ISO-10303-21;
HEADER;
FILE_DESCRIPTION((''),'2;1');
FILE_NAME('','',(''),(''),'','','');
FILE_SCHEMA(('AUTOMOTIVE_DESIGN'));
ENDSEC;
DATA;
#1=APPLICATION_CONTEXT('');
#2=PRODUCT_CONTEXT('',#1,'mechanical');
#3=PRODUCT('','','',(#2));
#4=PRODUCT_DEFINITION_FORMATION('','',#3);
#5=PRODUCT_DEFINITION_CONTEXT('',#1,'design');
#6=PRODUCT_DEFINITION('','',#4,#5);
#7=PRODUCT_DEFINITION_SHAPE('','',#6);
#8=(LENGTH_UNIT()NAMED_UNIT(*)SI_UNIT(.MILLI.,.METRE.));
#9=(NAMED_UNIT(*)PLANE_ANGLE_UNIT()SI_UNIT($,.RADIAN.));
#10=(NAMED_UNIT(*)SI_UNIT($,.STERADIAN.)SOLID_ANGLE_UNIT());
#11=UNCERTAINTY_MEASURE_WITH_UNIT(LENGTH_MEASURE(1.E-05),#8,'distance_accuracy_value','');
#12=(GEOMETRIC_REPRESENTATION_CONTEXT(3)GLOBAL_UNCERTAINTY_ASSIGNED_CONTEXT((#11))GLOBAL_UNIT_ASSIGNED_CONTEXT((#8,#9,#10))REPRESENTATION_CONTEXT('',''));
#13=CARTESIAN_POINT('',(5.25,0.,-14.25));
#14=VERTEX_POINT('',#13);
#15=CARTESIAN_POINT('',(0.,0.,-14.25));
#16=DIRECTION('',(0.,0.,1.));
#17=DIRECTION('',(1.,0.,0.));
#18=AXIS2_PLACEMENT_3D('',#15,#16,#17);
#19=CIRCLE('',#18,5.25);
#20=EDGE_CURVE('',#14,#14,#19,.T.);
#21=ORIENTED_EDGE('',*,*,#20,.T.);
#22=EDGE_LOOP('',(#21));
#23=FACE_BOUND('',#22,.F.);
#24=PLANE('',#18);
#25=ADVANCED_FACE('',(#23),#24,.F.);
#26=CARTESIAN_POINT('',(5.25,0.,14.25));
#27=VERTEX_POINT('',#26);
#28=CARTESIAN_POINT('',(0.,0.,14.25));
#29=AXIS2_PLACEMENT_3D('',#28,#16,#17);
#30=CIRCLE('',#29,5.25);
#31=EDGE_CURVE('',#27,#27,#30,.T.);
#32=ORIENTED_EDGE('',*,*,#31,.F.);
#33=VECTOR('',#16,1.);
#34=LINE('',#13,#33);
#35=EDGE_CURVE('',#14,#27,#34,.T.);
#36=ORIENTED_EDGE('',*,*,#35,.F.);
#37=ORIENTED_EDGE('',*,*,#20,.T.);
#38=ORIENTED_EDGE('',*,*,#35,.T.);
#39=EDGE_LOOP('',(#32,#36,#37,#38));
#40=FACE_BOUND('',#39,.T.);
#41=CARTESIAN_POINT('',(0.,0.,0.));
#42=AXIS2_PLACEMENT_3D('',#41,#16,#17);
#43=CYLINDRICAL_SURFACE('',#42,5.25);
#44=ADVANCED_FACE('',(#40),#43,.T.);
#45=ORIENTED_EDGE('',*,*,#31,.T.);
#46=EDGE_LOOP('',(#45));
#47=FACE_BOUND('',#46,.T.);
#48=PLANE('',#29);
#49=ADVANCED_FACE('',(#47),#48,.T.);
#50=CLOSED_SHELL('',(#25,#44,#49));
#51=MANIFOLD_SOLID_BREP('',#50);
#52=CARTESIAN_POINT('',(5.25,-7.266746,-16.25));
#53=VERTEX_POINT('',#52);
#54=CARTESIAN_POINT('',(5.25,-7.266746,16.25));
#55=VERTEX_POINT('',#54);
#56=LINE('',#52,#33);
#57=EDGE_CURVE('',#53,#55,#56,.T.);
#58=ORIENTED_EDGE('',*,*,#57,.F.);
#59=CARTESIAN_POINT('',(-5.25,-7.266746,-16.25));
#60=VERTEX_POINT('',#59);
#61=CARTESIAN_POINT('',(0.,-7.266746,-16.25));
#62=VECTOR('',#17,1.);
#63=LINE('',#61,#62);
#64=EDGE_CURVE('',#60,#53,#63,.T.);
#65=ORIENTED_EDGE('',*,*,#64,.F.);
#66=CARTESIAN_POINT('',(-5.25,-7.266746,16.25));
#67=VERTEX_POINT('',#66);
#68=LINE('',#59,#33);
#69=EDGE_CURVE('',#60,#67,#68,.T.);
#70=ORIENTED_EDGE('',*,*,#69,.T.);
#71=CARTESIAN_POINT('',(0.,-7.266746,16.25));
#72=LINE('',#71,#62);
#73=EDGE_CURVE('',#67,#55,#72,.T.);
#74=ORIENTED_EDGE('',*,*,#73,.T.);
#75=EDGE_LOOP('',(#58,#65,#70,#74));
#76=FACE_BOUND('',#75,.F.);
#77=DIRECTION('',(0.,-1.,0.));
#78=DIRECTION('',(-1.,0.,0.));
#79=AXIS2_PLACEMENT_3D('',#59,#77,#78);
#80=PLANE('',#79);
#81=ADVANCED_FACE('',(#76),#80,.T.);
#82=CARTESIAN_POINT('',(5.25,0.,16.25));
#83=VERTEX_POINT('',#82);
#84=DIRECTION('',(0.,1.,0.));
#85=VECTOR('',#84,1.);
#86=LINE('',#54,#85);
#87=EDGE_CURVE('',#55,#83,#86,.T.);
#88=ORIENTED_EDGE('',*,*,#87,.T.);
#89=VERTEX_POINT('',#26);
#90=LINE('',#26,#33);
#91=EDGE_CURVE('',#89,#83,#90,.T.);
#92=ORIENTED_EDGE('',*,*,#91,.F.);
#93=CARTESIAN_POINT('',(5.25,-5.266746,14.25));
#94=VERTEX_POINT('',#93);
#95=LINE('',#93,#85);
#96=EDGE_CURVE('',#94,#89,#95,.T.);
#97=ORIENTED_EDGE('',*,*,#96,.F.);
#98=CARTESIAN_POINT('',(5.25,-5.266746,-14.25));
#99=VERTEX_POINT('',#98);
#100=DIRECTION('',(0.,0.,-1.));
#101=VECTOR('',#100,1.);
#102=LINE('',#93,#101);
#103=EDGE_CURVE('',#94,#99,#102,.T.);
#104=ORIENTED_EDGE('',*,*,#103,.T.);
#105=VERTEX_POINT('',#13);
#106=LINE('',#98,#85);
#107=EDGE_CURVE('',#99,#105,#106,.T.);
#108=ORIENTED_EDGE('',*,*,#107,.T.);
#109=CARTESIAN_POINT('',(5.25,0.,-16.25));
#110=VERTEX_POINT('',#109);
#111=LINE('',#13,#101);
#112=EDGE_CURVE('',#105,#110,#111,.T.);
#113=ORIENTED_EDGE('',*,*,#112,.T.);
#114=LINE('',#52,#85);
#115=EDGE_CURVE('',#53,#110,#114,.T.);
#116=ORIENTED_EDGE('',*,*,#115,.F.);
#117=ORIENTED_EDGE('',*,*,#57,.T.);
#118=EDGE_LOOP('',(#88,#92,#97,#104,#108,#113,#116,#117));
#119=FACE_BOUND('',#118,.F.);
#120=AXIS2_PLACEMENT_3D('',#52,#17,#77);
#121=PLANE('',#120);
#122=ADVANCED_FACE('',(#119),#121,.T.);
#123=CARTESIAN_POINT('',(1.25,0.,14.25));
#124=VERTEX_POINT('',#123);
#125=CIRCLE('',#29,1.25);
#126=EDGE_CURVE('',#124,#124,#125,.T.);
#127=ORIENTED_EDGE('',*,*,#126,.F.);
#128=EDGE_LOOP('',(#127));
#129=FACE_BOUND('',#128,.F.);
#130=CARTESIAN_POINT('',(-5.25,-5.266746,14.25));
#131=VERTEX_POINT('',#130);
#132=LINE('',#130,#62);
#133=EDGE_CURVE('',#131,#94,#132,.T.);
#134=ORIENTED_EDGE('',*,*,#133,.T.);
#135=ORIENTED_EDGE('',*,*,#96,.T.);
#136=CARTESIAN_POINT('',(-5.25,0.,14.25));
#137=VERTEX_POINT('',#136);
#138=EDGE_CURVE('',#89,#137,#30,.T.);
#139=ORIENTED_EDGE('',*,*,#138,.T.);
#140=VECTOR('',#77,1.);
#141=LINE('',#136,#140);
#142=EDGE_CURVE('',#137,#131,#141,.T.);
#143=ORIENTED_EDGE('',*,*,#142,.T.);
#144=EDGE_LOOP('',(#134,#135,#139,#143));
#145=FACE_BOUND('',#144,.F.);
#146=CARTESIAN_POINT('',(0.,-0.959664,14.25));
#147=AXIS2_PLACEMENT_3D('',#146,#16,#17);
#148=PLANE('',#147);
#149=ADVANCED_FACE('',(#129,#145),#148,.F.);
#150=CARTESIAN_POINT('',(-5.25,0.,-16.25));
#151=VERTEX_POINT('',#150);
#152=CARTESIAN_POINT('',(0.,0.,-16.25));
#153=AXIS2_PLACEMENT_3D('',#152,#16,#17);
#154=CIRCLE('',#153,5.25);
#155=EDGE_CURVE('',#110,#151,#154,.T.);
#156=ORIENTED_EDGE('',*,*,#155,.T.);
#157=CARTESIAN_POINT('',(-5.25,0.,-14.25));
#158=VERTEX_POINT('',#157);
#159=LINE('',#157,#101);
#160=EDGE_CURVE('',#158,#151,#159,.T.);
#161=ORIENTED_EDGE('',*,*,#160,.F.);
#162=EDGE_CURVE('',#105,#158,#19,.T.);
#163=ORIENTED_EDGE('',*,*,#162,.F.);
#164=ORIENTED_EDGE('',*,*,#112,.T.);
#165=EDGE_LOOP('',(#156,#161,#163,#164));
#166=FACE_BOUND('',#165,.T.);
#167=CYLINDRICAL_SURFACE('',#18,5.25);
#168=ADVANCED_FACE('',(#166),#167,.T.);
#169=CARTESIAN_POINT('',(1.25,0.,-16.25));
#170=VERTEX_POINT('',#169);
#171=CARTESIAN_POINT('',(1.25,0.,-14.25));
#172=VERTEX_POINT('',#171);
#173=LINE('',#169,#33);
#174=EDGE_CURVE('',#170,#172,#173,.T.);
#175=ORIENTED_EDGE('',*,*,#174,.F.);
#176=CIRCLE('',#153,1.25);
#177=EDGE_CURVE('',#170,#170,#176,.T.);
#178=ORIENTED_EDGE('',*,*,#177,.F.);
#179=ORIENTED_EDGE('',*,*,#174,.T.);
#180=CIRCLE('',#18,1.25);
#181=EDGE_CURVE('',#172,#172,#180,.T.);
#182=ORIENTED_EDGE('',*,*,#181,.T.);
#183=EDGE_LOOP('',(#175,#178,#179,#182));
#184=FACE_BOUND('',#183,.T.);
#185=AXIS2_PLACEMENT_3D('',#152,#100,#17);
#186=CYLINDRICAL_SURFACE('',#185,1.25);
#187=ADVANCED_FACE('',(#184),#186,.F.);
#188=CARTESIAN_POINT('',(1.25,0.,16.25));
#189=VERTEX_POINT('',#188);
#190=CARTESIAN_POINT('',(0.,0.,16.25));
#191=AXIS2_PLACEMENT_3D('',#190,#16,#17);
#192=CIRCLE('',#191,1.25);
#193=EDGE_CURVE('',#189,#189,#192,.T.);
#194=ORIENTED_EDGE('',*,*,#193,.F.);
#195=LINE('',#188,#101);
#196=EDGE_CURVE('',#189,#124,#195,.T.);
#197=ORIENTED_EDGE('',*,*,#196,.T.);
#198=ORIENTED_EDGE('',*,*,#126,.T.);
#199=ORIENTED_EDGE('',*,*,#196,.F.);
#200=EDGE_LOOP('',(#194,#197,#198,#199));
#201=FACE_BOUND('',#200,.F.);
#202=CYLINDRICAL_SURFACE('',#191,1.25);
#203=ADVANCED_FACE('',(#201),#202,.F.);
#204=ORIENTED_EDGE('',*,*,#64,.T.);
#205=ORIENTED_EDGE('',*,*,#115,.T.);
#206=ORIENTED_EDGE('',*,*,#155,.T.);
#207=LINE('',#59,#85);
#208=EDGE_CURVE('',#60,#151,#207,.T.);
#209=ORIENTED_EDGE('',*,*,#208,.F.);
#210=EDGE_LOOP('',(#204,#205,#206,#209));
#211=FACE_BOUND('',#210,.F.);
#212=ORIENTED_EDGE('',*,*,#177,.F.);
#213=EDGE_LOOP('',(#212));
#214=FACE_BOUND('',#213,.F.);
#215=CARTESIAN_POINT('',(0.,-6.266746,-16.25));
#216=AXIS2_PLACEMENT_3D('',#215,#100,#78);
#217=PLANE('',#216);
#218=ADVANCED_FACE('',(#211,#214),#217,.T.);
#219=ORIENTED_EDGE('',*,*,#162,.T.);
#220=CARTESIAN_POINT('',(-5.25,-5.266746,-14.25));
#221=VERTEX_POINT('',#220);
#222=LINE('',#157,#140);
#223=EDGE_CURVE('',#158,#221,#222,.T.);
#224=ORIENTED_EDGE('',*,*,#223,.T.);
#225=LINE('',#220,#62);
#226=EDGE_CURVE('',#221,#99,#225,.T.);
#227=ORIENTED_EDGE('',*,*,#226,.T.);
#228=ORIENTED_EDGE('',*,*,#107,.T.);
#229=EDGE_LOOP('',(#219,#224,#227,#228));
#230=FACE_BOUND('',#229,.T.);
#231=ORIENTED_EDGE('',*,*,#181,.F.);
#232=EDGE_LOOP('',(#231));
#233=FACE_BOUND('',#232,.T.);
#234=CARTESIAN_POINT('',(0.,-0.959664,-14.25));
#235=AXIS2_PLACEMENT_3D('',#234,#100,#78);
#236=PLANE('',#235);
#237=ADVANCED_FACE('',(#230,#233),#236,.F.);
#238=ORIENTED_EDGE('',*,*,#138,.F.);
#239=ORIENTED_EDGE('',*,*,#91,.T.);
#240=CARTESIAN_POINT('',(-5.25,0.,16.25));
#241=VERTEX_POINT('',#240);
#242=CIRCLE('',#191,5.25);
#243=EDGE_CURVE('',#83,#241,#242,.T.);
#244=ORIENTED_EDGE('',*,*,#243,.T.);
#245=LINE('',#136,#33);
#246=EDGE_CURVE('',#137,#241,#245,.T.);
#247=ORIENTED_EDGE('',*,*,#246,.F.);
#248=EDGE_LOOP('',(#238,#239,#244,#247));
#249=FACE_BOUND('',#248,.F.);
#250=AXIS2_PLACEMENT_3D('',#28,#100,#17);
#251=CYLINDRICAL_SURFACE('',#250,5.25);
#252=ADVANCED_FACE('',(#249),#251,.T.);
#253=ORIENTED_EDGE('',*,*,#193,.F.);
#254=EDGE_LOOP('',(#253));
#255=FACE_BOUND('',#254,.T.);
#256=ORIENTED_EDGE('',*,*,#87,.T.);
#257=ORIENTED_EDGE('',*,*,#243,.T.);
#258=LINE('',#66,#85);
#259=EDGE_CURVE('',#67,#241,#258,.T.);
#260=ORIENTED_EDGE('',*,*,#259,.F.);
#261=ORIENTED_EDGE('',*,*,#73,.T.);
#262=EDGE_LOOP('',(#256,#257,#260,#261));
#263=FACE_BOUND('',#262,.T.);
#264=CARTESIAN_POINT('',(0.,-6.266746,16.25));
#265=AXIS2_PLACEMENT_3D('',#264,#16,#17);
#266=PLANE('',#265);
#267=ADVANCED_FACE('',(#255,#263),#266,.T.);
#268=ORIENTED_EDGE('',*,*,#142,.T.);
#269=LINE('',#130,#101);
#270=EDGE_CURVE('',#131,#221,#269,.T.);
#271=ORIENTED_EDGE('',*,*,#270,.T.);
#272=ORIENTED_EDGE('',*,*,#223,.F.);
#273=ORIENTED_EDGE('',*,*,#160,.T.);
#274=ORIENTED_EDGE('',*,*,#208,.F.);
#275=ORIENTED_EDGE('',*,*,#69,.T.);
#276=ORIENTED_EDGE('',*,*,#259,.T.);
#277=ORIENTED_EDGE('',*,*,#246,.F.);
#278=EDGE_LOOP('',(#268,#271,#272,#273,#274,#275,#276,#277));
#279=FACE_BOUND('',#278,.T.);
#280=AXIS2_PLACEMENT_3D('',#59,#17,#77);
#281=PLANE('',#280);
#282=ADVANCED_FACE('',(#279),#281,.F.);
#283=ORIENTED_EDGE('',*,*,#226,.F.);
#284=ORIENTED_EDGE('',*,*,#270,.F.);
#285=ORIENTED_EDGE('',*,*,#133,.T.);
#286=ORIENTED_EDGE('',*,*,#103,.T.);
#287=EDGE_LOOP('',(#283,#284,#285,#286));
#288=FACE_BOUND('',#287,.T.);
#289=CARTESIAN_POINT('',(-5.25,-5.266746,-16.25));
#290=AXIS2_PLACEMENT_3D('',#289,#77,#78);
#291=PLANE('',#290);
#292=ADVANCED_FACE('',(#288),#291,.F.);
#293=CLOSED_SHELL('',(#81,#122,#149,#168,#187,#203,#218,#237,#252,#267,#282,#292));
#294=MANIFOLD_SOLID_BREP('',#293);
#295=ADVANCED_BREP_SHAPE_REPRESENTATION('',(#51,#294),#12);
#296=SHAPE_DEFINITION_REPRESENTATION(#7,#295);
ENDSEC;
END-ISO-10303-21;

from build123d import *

# Parameters (mm, degrees)
F0_R     = 5.25
F1_DEPTH = 14.25
F3_DEPTH = 2
F4_W     = 10.5
F4_H     = 2
F5_DEPTH = 16.25
F6_R     = 1.25
F7_DEPTH = 2


with BuildPart() as f1:
    # F0 (on Top) → F1 (new body, symmetric)
    with BuildSketch(Plane.XY):
        Circle(F0_R)
    extrude(amount=F1_DEPTH, both=True)


with BuildPart() as f3:
    # F2 (on face) → F3 (new body)
    with BuildSketch(Plane.XY.offset(14.25)):
        with BuildLine():
            Line((5.25, -5.2667460404), (5.25, 0))
            ThreePointArc((5.25, 0), (0, 5.25), (-5.25, 0))
            Line((-5.25, 0), (-5.25, -5.2667460404))
            Line((-5.25, -5.2667460404), (5.25, -5.2667460404))
        make_face()
    extrude(amount=F3_DEPTH)

    # F4 (on face) → F5 (join, through all)
    with BuildSketch(Plane.XY.offset(16.25)):
        with Locations((0, -6.2667460404)):
            Rectangle(F4_W, F4_H)
    extrude(amount=-F5_DEPTH)

    # F6 (on face) → F7 (cut, through all)
    with BuildSketch(Plane.XY.offset(16.25)):
        Circle(F6_R)
    extrude(amount=-F7_DEPTH, mode=Mode.SUBTRACT)

    # F8: F3 across plane


with BuildPart() as f3_1:
    add(f3.part)
    add(f3.part.mirror(Plane.XY))


solid = Compound([f1.part, f3_1.part])
